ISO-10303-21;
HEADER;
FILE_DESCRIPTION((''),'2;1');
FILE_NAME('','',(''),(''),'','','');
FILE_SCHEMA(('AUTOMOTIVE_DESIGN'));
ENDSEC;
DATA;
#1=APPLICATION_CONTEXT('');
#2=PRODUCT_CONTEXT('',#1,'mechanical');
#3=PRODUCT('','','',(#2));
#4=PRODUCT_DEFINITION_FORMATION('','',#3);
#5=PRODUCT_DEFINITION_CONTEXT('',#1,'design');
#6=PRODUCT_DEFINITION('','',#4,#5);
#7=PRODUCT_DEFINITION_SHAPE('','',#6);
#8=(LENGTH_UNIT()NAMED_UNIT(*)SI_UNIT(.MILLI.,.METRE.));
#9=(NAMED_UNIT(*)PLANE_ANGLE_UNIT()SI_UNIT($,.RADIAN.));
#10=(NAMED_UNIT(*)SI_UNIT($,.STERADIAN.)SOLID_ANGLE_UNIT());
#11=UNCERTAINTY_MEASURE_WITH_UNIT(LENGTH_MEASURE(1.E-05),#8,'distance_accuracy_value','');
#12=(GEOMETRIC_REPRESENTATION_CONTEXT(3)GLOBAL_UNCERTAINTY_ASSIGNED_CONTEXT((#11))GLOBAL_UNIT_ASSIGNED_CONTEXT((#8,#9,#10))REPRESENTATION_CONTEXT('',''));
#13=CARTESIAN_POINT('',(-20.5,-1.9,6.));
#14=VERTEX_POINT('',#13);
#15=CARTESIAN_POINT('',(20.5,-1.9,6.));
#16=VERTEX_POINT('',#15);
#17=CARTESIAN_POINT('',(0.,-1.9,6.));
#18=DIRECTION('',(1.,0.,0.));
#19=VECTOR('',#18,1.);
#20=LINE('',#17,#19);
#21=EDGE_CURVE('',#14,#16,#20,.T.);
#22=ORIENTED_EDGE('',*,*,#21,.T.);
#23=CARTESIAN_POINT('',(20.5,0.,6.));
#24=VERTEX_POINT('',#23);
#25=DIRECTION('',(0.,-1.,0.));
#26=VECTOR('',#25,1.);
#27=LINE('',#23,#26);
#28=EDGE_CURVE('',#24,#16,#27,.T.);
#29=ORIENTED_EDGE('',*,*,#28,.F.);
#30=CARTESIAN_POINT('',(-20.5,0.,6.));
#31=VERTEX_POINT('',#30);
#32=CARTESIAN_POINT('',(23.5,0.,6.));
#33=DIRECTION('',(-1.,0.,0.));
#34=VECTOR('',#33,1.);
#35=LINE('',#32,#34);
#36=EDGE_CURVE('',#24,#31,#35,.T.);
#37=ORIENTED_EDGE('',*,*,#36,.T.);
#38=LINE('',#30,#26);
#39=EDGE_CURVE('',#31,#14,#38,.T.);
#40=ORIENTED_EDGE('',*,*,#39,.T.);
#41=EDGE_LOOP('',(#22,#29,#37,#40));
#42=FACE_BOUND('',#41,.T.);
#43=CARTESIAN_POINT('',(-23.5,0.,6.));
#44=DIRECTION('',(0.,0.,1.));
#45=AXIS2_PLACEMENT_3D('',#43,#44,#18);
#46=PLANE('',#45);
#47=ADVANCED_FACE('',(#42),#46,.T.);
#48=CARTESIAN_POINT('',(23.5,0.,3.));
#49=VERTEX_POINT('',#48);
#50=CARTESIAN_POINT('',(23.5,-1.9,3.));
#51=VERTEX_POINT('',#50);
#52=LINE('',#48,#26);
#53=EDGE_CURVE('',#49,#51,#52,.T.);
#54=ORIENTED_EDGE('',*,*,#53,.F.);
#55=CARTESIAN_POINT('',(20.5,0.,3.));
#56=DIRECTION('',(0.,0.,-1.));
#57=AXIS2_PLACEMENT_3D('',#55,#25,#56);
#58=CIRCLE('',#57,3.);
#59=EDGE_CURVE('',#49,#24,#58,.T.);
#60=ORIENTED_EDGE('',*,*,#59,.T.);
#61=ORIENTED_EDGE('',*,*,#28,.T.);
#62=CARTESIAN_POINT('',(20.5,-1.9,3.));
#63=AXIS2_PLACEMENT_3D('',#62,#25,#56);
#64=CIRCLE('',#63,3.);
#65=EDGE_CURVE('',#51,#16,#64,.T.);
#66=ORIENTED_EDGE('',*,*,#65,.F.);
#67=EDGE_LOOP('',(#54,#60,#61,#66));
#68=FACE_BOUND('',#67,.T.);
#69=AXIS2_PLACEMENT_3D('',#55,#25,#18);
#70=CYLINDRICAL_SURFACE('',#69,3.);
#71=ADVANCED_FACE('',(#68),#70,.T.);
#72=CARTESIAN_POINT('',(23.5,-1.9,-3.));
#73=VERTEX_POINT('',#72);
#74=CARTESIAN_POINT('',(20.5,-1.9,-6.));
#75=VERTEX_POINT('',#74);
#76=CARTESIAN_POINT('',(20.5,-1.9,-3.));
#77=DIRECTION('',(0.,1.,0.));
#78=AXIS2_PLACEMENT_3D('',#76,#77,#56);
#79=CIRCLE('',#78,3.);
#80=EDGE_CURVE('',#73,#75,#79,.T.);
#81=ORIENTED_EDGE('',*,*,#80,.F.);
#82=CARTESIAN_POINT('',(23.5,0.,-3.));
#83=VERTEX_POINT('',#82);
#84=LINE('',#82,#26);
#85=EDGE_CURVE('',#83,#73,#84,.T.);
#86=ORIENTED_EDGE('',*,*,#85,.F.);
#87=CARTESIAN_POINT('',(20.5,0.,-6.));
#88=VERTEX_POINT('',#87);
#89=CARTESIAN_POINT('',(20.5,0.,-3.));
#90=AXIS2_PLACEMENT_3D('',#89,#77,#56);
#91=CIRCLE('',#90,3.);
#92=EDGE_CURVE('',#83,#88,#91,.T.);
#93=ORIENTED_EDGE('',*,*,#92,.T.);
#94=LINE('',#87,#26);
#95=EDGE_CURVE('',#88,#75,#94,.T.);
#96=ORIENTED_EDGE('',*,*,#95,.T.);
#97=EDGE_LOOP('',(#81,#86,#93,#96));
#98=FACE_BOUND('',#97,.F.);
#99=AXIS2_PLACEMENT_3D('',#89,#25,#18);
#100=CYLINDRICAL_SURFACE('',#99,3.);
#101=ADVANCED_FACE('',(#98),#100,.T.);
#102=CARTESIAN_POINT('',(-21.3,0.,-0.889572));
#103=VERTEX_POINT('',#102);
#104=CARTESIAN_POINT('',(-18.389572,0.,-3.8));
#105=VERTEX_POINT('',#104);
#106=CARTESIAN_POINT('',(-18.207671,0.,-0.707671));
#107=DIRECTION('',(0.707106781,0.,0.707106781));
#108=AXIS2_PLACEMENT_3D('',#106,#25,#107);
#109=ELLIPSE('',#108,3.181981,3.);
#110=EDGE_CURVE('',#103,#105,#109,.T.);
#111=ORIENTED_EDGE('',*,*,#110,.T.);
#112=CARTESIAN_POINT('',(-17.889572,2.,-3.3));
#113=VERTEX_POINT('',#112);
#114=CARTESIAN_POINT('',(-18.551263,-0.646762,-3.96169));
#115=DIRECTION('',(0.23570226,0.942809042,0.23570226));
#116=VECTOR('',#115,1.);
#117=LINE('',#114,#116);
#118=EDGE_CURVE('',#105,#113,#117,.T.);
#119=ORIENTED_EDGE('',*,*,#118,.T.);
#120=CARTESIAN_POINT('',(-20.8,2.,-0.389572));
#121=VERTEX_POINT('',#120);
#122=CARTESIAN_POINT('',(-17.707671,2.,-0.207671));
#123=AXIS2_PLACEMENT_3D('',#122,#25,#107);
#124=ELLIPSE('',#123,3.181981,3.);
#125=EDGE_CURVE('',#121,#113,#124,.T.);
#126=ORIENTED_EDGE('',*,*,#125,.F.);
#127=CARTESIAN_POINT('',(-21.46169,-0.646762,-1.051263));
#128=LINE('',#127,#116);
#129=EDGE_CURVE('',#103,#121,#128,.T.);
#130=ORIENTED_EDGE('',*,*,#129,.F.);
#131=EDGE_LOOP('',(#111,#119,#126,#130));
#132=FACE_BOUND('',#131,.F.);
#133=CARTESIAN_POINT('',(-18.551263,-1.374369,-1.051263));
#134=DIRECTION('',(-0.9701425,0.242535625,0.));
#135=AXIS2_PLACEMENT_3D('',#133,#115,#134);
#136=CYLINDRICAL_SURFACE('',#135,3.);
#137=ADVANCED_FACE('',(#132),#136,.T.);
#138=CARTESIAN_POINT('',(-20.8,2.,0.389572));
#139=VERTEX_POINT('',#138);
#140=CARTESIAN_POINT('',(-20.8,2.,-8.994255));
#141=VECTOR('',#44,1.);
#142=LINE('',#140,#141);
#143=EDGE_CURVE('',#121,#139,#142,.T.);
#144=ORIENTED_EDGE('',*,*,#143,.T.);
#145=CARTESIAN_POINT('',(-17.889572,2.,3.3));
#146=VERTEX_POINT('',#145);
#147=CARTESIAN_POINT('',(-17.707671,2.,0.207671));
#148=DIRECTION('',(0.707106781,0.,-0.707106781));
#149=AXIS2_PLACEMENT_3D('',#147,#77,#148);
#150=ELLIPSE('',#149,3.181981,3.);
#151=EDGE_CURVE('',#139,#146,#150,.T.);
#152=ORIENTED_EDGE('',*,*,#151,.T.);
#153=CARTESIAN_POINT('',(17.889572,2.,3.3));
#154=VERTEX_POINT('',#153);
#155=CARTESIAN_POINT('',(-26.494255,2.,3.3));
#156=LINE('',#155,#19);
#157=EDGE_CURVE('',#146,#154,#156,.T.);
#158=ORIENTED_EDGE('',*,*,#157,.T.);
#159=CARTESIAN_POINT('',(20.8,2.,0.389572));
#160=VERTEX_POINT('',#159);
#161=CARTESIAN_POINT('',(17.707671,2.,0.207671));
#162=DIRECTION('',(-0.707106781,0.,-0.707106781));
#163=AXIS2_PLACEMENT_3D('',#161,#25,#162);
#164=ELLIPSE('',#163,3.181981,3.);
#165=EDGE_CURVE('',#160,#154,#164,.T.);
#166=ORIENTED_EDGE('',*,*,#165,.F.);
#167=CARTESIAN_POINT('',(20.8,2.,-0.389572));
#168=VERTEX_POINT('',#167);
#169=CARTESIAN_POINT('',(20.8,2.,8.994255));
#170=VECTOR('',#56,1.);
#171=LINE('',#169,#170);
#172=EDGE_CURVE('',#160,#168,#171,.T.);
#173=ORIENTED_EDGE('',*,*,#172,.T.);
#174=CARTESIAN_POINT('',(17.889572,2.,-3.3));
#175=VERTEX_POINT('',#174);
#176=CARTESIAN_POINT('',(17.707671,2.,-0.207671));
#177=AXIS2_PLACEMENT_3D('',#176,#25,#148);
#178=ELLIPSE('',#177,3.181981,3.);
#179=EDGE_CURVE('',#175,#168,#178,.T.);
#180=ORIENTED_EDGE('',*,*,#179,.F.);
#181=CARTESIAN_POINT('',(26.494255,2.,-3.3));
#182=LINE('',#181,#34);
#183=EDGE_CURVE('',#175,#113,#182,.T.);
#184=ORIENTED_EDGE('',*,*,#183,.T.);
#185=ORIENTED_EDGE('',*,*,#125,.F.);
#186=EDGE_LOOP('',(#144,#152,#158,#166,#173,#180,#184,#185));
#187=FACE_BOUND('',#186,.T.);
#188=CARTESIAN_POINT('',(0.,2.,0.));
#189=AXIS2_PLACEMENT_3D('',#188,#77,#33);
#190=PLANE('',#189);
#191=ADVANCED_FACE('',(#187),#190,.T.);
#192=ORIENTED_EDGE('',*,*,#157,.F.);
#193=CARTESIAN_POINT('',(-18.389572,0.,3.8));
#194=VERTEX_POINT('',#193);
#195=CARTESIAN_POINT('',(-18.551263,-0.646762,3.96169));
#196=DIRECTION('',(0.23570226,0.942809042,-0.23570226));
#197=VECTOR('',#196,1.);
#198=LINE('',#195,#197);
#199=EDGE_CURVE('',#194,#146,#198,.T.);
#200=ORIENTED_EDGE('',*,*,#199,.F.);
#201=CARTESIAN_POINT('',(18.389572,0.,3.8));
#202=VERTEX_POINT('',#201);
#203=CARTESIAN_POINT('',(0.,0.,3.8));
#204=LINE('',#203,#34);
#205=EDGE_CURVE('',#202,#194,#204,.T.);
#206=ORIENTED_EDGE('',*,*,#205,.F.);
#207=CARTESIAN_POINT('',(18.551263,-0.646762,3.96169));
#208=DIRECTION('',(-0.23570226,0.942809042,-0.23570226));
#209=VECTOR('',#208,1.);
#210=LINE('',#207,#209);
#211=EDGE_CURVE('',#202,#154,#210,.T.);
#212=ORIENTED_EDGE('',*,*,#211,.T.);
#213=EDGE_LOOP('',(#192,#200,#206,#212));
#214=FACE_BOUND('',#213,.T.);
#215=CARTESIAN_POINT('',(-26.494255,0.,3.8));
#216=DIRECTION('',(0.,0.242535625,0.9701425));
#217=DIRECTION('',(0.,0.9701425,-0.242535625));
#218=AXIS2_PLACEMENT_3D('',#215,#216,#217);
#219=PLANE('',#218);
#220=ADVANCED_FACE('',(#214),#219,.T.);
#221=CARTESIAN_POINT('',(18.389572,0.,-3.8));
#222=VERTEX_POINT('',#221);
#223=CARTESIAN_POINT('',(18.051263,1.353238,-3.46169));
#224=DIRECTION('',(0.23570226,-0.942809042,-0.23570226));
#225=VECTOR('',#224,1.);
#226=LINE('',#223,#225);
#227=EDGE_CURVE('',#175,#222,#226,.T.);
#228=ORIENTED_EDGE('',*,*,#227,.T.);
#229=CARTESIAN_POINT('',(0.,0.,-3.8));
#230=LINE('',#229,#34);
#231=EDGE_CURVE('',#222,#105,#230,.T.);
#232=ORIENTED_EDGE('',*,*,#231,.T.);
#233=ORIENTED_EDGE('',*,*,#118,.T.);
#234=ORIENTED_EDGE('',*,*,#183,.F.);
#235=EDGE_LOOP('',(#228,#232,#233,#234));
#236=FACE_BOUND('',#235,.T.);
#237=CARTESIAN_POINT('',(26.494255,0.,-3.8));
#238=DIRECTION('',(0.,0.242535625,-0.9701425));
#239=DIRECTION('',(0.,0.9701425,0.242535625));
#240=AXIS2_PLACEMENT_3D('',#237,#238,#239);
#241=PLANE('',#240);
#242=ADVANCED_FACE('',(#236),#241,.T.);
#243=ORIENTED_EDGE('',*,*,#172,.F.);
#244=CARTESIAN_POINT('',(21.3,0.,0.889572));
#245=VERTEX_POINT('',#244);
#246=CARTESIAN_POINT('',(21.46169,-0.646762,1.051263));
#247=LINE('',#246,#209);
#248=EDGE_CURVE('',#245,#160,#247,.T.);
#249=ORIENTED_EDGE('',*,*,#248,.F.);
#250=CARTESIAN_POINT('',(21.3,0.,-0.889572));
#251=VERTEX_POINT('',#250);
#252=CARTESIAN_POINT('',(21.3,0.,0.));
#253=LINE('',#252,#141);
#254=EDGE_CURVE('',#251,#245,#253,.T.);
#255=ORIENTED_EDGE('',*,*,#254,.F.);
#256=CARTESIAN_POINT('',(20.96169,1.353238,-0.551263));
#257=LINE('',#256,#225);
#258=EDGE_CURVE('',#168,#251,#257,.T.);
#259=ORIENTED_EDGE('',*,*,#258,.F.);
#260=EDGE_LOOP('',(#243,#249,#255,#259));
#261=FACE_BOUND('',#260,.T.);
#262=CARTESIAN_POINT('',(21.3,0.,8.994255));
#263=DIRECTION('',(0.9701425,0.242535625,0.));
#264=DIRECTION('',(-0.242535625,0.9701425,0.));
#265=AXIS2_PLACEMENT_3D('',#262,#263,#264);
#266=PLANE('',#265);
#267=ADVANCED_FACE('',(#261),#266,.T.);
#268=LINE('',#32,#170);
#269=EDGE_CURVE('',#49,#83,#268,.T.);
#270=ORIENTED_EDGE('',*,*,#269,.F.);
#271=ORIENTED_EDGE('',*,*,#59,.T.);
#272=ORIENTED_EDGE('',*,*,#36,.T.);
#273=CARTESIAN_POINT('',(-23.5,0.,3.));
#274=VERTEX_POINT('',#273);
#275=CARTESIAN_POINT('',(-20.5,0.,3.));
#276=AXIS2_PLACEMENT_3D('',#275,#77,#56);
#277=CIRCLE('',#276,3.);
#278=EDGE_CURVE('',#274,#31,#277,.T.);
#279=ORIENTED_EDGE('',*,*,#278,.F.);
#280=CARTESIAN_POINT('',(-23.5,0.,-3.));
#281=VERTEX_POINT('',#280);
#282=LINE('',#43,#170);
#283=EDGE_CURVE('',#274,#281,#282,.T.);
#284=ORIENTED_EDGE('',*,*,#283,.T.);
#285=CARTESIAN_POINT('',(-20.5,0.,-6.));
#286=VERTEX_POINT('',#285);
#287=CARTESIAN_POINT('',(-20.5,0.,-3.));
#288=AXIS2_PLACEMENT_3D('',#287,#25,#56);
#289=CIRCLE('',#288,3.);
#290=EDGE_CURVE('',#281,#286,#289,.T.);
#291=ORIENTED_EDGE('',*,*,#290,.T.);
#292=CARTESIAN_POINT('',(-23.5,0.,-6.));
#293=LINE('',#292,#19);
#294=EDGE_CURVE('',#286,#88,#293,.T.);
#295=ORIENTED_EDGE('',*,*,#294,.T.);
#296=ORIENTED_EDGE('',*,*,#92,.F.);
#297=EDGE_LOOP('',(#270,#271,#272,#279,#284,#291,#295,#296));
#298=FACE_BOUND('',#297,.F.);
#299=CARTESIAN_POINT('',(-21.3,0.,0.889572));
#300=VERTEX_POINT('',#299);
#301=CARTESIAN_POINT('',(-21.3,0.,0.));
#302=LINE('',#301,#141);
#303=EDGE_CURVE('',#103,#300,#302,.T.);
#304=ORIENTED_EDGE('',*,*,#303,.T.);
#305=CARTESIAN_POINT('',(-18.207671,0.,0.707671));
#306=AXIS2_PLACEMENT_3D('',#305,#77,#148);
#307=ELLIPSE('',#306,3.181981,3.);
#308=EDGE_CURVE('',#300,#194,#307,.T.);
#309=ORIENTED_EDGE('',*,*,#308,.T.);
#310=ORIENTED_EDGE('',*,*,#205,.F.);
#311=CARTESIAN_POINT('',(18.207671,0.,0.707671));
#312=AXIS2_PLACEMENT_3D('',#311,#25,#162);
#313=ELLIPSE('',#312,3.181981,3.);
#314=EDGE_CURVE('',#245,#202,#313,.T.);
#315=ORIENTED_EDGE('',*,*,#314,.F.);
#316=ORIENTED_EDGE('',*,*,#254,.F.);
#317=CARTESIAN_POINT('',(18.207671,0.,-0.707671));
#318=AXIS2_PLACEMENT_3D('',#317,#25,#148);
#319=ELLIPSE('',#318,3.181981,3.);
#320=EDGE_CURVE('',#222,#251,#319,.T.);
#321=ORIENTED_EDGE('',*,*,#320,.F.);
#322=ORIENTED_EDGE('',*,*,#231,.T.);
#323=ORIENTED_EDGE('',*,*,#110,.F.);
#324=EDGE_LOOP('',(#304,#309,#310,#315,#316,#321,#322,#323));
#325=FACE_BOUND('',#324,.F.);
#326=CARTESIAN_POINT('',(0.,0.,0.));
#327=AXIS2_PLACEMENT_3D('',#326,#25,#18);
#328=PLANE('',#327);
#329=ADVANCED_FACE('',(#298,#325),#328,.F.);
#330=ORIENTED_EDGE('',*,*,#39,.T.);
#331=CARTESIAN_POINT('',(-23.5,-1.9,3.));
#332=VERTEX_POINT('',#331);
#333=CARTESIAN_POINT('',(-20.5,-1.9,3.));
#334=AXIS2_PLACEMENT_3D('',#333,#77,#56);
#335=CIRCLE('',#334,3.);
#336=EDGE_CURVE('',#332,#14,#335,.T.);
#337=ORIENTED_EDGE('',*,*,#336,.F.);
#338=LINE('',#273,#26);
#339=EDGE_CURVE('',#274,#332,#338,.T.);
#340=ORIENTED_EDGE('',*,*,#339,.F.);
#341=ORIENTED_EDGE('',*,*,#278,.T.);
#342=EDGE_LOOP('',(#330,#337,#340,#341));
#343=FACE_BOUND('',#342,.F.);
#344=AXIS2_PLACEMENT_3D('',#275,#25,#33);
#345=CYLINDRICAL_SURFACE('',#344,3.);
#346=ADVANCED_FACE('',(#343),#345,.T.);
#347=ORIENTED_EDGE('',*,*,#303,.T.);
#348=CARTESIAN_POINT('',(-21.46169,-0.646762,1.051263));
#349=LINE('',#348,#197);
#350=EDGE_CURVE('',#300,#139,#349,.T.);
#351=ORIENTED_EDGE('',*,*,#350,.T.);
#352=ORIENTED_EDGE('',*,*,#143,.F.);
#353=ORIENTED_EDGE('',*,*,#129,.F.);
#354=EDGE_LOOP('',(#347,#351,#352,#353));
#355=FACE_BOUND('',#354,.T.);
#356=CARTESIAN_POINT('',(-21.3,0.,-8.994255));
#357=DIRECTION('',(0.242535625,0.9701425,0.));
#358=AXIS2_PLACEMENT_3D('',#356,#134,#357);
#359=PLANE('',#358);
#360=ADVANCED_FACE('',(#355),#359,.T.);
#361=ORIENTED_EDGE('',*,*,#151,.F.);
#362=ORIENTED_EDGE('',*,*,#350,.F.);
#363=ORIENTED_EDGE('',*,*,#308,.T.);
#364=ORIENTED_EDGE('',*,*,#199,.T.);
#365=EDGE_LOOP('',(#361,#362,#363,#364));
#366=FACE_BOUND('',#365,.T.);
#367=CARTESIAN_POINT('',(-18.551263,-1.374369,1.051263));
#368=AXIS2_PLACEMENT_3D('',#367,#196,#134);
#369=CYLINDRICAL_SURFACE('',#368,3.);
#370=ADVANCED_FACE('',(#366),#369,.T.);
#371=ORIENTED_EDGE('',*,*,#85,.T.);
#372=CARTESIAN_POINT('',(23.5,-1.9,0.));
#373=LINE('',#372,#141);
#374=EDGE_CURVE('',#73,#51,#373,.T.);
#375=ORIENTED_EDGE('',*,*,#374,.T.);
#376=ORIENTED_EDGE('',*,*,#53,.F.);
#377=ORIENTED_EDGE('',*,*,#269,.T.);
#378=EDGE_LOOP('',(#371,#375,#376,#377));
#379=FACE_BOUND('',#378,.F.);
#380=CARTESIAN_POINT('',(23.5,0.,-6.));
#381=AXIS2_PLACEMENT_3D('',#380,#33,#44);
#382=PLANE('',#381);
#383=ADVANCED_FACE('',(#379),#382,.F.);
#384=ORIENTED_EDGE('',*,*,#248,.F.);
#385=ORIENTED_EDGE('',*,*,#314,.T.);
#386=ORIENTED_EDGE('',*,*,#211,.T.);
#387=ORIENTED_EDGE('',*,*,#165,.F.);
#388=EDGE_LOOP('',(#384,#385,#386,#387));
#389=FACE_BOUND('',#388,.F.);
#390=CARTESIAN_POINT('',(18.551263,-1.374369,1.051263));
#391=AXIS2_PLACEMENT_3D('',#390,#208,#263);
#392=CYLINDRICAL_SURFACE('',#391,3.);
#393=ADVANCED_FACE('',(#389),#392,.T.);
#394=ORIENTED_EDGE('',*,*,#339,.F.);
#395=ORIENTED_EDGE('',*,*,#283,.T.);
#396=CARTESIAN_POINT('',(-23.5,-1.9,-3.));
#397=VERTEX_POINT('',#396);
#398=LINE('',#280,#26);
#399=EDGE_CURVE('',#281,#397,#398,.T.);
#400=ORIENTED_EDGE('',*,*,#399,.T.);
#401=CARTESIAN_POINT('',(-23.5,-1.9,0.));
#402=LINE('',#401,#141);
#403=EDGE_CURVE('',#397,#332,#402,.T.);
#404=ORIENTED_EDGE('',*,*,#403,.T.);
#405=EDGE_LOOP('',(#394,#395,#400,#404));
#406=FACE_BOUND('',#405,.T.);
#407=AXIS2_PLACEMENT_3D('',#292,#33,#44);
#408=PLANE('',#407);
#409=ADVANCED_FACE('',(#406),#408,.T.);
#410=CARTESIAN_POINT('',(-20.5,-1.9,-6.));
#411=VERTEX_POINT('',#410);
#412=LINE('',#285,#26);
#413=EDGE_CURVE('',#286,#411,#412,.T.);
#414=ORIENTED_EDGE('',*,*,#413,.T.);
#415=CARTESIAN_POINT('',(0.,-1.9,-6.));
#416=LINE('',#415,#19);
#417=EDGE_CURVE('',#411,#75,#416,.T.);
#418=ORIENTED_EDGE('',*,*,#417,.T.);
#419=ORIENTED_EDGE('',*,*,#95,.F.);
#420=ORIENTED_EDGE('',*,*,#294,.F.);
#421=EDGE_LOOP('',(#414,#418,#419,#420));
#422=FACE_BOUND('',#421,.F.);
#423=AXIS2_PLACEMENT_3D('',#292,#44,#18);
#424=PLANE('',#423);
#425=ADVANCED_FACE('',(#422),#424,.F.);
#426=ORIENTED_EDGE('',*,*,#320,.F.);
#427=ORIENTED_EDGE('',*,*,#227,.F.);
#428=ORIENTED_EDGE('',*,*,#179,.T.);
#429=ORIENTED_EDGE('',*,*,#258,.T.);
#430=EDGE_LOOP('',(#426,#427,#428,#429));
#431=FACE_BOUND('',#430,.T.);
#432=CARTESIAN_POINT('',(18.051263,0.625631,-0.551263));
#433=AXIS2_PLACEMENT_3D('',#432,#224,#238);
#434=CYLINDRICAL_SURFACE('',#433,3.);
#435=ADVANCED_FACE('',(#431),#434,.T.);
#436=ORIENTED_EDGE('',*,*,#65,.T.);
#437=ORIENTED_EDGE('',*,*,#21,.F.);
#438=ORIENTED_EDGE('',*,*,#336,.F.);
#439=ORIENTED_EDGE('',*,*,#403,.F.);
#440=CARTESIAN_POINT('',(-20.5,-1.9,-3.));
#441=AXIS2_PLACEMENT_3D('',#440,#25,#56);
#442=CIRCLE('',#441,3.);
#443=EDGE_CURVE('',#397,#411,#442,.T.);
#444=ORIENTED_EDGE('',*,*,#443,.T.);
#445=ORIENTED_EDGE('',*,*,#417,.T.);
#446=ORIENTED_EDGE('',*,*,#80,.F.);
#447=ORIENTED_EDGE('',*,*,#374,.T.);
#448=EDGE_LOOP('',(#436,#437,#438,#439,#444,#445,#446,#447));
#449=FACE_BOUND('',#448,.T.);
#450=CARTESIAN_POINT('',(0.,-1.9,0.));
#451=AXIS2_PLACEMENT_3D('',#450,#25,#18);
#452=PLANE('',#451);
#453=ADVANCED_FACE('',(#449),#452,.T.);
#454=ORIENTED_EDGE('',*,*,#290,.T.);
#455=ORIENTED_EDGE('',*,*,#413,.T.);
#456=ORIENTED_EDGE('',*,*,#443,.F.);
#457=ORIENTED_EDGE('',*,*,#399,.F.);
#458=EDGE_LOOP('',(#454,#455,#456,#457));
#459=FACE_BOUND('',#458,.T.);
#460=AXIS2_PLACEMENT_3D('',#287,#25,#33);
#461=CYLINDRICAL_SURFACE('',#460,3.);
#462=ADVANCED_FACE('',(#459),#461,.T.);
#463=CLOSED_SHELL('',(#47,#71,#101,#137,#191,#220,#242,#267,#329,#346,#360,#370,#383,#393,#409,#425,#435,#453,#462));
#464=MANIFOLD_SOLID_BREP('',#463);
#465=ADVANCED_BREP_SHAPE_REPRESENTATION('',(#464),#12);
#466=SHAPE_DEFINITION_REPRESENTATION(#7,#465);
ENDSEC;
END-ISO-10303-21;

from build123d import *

# Parameters (mm, degrees)
F0_W         = 47
F0_H         = 12
F1_DEPTH     = 1.9
F2_W         = 42.6
F2_H         = 7.6
F3_DEPTH     = 2
F4_T4_DEPTH  = 52.9885099991
F4_T9_DEPTH  = 17.9885099991
F4_T14_DEPTH = 52.9885099991
F4_T19_DEPTH = 17.9885099991
F5_R         = 3


# Not quite as in the source:
# - a fillet or chamfer that OpenCascade refuses, or shapes differently, is made with other operations: its cross-section is extruded or revolved along the edge and cut away or added


with BuildPart() as f1:
    # F0 (on Front) → F1 (new body)
    with BuildSketch(Plane.XZ):
        Rectangle(F0_W, F0_H)
    extrude(amount=F1_DEPTH)

    # F2 (on face) → F3 (join)
    with BuildSketch(Plane(origin=(0, 0, 0), x_dir=(-1, 0, 0), z_dir=(0, 1, 0))):
        Rectangle(F2_W, F2_H)
    extrude(amount=F3_DEPTH)

    # F4: chamfer of 0.5 x 2 on 4 edges, made by hand


with BuildPart() as f4_tool2:
    # F4_s3 → F4_t4 (new body)
    with BuildSketch(Plane.YZ.offset(26.4942549995)):
        Polygon((0, -3.8), (2, -3.3), (2, -3.8), align=None)
    extrude(amount=-F4_T4_DEPTH)

    split(bisect_by=Plane.XZ, keep=Keep.BOTTOM)


with BuildPart() as f1_1:
    add(f1.part)

    # F4_t1: cut F4_tool2
    add(f4_tool2.part, mode=Mode.SUBTRACT)


with BuildPart() as f4_tool7:
    # F4_s8 → F4_t9 (new body)
    with BuildSketch(Plane.XY.offset(-8.9942549995)):
        Polygon((-21.3, 0), (-20.8, 2), (-21.3, 2), align=None)
    extrude(amount=F4_T9_DEPTH)

    split(bisect_by=Plane.XZ, keep=Keep.BOTTOM)


with BuildPart() as f1_2:
    add(f1_1.part)

    # F4_t6: cut F4_tool7
    add(f4_tool7.part, mode=Mode.SUBTRACT)


with BuildPart() as f4_tool12:
    # F4_s13 → F4_t14 (new body)
    with BuildSketch(Plane.YZ.offset(-26.4942549995)):
        Polygon((0, 3.8), (2, 3.3), (2, 3.8), align=None)
    extrude(amount=F4_T14_DEPTH)

    split(bisect_by=Plane.XZ, keep=Keep.BOTTOM)


with BuildPart() as f1_3:
    add(f1_2.part)

    # F4_t11: cut F4_tool12
    add(f4_tool12.part, mode=Mode.SUBTRACT)


with BuildPart() as f4_tool17:
    # F4_s18 → F4_t19 (new body)
    with BuildSketch(Plane.XY.offset(8.9942549995)):
        Polygon((21.3, 0), (20.8, 2), (21.3, 2), align=None)
    extrude(amount=-F4_T19_DEPTH)

    split(bisect_by=Plane.XZ, keep=Keep.BOTTOM)


with BuildPart() as f1_4:
    add(f1_3.part)

    # F4_t16: cut F4_tool17
    add(f4_tool17.part, mode=Mode.SUBTRACT)

    # F5
    f5_edges = [f1_4.edges().sort_by_distance(p)[0] for p in [
        (-23.5, -0.95, -6),
        (23.5, -0.95, -6),
        (23.5, -0.95, 6),
        (-23.5, -0.95, 6),
        (-21.05, 1, 3.55),
        (-21.05, 1, -3.55),
        (21.05, 1, 3.55),
        (21.05, 1, -3.55),
    ]]
    fillet(f5_edges, radius=F5_R)


solid = f1_4.part
